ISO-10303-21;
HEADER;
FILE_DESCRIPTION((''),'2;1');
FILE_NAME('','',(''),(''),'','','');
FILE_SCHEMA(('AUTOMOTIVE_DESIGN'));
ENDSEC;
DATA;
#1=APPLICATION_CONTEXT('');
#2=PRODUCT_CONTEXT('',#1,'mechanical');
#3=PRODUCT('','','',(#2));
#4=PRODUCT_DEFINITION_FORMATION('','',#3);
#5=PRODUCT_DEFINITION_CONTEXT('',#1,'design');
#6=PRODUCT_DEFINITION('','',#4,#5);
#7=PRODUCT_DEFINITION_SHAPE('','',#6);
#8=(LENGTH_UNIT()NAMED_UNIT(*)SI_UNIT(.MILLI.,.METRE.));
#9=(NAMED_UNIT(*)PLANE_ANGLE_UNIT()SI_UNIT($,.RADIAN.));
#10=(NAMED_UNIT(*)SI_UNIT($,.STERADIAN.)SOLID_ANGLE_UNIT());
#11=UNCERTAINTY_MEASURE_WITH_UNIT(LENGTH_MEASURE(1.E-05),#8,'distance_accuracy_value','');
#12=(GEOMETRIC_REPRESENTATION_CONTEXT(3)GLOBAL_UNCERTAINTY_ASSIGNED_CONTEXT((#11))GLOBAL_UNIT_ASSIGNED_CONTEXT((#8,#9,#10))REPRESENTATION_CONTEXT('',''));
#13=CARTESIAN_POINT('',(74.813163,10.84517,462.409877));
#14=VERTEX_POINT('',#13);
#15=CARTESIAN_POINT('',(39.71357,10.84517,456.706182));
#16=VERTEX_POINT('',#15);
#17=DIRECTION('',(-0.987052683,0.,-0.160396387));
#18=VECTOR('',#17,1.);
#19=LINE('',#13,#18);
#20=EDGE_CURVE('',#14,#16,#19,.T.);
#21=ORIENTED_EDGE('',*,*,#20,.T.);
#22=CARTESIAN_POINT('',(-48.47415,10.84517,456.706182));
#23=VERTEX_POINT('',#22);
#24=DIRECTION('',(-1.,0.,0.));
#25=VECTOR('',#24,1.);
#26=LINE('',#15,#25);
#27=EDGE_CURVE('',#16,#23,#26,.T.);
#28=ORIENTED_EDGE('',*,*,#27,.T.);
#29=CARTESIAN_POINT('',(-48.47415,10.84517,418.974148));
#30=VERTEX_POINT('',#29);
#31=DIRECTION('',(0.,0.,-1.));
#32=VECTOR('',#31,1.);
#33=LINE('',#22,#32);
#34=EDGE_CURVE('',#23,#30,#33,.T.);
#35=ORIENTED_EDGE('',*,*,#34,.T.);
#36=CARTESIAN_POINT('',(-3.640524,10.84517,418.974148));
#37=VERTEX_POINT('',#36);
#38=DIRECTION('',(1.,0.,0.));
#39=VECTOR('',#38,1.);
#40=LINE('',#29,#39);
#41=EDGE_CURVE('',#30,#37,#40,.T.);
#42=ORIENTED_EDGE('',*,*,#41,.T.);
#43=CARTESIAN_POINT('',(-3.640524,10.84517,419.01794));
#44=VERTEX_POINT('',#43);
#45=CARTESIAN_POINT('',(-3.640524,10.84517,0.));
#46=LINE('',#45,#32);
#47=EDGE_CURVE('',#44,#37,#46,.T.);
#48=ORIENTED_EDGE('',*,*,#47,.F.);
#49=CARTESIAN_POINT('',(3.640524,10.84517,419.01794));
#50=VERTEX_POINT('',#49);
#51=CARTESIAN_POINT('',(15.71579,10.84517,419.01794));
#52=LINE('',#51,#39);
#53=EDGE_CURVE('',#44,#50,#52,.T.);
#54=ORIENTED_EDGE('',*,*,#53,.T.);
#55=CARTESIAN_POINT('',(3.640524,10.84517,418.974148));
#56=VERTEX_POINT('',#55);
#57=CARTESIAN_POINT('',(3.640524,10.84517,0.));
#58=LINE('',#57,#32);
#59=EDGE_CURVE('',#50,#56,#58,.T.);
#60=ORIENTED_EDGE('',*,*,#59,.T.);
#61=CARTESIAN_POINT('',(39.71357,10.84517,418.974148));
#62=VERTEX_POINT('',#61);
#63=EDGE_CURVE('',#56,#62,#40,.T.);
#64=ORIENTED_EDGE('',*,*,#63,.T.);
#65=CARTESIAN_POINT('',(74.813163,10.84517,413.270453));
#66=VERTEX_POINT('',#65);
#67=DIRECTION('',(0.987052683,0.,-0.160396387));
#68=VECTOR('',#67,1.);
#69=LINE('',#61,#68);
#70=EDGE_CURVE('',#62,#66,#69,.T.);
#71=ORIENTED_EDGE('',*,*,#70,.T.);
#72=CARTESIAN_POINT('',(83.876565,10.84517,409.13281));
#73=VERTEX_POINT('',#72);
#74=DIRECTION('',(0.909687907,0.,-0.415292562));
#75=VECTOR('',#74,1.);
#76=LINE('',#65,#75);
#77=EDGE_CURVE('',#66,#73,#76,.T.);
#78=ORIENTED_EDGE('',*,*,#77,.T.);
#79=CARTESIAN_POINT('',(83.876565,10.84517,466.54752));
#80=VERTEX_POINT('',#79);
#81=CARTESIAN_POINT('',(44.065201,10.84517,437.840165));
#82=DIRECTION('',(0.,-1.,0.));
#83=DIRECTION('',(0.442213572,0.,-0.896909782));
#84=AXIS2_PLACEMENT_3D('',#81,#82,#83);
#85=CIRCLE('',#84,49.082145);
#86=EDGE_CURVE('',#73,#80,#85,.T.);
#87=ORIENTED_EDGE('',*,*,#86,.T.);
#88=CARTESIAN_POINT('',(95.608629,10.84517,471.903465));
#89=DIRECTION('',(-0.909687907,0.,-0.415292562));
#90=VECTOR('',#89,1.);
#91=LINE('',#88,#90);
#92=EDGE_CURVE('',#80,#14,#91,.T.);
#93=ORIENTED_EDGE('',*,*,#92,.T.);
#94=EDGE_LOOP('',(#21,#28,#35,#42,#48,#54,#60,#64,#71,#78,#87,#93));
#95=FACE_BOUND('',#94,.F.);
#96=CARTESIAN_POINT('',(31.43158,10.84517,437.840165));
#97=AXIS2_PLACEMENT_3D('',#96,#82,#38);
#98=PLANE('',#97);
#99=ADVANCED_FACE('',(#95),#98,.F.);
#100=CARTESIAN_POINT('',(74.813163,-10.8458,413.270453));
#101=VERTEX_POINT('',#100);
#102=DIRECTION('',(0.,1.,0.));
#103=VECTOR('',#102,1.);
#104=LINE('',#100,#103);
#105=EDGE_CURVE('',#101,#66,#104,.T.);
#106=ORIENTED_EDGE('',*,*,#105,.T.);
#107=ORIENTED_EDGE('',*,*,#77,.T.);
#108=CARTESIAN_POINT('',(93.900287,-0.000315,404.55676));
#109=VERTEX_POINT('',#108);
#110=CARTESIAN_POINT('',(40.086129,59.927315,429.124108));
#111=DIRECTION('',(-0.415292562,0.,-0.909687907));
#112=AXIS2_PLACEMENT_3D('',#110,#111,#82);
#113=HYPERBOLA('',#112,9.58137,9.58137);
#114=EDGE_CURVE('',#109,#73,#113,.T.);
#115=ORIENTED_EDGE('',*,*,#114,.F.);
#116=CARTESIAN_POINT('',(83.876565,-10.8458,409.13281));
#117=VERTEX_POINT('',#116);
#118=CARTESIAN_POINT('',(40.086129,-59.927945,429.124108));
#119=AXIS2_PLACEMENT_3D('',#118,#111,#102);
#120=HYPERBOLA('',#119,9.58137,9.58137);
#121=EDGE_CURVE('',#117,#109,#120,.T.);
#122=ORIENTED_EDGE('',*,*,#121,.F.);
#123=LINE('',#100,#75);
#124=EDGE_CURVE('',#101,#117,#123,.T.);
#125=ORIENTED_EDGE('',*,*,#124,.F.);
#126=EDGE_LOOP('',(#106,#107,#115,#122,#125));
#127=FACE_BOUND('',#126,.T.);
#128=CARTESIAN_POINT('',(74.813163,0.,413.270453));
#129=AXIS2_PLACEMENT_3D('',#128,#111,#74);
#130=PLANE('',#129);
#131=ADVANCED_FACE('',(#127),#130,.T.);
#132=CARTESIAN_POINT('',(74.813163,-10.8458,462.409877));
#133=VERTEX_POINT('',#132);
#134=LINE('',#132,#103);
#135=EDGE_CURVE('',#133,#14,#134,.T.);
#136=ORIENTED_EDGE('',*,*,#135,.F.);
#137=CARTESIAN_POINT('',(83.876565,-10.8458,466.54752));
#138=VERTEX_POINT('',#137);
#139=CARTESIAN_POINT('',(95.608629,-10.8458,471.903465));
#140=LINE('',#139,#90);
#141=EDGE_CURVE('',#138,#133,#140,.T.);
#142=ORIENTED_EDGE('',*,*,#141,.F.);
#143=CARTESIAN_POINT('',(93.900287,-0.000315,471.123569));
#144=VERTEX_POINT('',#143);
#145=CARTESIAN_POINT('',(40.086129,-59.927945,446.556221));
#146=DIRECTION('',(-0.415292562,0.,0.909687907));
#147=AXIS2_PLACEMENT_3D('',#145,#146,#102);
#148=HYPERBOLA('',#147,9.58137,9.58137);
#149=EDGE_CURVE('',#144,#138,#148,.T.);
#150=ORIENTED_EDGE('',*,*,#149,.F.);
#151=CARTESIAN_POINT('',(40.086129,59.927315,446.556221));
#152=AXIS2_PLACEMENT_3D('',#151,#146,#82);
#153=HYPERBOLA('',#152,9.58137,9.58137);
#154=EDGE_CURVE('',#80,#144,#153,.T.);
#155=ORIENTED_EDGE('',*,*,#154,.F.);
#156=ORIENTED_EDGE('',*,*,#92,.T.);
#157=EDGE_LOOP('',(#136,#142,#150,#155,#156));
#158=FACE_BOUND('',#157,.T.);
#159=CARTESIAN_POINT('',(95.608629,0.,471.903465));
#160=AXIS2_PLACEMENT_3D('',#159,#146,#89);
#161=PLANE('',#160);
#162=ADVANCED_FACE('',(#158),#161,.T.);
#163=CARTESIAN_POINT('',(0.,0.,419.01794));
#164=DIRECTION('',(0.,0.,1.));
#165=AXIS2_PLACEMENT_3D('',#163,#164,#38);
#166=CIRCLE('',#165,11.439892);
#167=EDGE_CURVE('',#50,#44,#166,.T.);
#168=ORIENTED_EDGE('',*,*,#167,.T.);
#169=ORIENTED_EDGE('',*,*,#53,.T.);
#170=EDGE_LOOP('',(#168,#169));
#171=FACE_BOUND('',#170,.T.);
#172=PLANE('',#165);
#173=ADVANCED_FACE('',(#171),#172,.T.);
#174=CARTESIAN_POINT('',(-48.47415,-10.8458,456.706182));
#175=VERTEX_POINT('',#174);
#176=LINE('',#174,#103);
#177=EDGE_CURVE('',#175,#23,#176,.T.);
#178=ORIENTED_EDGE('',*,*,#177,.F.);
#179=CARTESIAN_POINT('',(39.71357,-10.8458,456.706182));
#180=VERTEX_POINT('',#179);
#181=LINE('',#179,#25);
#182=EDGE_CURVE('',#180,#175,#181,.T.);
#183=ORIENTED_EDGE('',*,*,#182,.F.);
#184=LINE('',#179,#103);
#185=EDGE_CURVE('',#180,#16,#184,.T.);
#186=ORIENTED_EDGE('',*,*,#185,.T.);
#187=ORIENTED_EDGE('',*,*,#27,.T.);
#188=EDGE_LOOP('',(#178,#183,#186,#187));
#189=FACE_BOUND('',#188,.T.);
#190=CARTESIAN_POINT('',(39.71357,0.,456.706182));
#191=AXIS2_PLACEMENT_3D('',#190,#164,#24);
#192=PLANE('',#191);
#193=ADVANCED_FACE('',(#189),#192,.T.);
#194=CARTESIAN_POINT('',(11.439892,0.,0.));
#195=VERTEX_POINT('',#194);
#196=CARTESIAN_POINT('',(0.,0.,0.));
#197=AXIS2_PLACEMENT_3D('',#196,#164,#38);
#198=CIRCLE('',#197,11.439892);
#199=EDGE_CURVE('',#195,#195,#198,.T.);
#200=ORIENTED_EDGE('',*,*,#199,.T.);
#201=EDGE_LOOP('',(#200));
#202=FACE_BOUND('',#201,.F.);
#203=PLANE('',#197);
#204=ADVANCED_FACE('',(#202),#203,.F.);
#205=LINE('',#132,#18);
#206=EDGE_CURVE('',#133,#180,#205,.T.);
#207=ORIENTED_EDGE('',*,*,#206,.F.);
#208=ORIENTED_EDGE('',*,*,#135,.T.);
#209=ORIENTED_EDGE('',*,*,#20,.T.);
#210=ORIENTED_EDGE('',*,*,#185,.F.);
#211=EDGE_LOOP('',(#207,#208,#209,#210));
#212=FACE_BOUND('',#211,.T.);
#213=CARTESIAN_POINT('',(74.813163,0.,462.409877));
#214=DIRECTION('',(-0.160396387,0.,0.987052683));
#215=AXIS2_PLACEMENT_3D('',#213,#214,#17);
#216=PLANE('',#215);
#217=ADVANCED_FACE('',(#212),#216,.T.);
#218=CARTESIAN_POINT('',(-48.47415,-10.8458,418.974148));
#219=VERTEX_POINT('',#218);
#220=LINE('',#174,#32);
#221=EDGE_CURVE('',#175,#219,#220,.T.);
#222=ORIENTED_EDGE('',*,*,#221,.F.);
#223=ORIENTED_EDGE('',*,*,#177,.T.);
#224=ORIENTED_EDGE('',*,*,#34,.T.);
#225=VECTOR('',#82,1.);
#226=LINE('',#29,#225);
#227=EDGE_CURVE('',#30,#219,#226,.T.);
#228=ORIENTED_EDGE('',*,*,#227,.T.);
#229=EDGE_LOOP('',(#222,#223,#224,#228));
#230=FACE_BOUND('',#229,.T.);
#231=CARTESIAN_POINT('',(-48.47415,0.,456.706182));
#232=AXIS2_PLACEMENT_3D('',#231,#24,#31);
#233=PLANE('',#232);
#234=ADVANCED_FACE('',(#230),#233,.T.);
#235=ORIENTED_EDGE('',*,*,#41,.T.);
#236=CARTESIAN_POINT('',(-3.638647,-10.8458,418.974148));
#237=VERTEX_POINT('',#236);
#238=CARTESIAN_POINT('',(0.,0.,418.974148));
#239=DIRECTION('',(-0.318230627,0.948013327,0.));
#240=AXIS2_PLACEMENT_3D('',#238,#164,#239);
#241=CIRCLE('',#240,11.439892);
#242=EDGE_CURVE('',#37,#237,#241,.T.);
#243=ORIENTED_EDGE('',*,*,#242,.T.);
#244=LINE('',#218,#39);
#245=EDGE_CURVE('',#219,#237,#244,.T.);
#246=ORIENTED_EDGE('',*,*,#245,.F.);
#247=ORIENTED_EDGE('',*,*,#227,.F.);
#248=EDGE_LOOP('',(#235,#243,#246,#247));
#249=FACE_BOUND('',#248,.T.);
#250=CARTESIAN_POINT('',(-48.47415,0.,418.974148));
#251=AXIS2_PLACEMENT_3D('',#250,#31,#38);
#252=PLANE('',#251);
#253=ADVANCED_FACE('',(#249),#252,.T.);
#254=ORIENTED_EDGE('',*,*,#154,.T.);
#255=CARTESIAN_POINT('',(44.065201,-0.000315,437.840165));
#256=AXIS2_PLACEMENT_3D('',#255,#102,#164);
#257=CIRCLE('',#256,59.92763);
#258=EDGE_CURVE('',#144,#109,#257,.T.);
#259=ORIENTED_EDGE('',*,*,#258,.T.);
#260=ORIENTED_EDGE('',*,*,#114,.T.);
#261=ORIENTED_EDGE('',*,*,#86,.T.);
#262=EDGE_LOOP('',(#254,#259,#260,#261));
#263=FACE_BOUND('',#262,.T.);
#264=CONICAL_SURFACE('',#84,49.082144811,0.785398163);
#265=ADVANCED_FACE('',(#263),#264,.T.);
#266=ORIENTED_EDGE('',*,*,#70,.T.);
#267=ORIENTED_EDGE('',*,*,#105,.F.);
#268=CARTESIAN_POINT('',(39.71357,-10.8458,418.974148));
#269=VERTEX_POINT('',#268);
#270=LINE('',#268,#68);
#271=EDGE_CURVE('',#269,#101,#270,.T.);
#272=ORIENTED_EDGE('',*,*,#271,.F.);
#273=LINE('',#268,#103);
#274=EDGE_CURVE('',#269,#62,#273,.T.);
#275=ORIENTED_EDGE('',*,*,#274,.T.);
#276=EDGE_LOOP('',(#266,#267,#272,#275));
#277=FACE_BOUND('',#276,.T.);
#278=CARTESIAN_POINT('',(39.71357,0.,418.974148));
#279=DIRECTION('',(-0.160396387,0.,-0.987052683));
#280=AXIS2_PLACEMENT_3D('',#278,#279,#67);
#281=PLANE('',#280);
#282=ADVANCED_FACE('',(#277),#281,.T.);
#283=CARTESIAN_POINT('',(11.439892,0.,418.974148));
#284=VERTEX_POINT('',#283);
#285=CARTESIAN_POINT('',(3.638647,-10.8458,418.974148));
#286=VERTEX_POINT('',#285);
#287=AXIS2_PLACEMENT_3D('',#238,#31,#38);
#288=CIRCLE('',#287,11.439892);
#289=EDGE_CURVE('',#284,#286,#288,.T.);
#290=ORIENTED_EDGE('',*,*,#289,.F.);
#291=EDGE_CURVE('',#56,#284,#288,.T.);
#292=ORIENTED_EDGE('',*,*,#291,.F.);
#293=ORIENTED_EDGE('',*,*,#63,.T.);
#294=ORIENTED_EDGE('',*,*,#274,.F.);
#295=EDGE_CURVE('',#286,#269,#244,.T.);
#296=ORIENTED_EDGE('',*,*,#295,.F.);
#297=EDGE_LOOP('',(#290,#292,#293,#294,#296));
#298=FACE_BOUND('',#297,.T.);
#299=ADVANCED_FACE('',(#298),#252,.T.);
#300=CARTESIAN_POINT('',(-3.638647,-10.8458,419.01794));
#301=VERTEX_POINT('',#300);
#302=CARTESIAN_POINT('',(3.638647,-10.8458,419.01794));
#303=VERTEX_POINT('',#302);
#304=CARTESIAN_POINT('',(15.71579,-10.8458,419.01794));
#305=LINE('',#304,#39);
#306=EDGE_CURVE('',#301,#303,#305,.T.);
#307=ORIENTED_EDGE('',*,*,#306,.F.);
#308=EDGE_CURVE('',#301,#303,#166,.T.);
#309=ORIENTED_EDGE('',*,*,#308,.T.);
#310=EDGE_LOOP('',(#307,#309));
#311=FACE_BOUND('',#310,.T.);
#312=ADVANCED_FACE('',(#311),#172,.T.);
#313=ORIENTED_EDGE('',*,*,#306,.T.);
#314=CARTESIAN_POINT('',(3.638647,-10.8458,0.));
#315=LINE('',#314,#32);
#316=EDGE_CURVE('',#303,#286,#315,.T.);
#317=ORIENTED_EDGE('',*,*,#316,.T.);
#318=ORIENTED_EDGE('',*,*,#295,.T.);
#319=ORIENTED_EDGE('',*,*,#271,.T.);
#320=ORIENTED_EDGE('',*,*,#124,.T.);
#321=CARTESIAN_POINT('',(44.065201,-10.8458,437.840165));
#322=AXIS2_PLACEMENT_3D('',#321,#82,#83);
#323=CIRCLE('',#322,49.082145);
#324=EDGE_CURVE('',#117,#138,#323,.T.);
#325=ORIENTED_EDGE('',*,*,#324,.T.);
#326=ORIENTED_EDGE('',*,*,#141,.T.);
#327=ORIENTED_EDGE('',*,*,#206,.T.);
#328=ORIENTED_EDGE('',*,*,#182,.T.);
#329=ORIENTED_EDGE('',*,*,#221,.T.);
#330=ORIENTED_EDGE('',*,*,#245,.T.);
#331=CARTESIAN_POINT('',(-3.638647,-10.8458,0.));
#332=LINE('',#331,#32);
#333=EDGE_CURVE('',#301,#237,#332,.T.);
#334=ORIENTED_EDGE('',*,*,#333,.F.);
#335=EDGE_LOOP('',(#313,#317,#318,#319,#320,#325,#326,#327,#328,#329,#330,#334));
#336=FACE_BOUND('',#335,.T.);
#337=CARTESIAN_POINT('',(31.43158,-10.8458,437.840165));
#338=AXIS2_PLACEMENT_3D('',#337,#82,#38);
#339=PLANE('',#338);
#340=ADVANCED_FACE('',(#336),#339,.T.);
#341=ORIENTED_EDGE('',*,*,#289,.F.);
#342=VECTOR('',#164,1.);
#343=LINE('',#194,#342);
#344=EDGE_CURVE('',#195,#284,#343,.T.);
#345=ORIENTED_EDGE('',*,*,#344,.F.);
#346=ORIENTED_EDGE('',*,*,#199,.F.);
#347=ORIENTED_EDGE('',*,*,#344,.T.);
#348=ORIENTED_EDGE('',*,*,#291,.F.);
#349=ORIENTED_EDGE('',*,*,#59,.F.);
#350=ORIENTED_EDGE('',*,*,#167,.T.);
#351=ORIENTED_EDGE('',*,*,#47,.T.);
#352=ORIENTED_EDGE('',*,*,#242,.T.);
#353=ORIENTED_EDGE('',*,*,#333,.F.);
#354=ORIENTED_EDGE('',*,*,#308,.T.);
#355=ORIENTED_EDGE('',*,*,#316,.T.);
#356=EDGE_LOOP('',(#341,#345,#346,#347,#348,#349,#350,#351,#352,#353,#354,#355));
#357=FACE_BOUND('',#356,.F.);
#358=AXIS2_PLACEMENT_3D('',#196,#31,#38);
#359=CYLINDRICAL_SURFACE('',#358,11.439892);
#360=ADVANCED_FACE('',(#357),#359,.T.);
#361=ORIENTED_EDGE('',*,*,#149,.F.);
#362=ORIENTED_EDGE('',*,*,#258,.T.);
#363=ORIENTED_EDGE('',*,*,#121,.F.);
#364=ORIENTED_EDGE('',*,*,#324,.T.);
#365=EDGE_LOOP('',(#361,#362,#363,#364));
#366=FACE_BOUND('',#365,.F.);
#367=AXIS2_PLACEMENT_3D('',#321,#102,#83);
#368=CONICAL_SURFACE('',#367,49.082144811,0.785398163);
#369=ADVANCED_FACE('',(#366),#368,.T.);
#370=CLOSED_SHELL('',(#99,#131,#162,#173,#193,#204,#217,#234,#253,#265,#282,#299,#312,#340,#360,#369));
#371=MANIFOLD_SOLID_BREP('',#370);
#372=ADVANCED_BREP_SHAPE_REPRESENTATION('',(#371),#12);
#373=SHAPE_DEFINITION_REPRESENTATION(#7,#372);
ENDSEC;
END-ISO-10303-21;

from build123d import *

# Parameters (mm, degrees)
F0_R          = 11.4398919201
F1_DEPTH      = 419.01794
F3_DEPTH      = 10.8458
F3_DEPTH_BACK = 10.84517
F4_T2_ANGLE   = 127.5095974459
F4_T4_ANGLE   = 127.5095974459


# Not quite as in the source:
# - a fillet or chamfer that OpenCascade refuses, or shapes differently, is made with other operations: its cross-section is extruded or revolved along the edge and cut away or added


with BuildPart() as f1:
    # F0 (on Top) → F1 (new body)
    with BuildSketch(Plane.XY):
        Circle(F0_R)
    extrude(amount=F1_DEPTH)

    # F2 (on Front) → F3 (join, two sides)
    with BuildSketch(Plane.XZ) as f3_sk:
        with BuildLine():
            Line((-48.4741501155, 456.7061818215), (-48.4741501155, 418.9741480511))
            Line((-48.4741501155, 418.9741480511), (39.7135697317, 418.9741480511))
            Line((39.7135697317, 418.9741480511), (74.8131631411, 413.270452539))
            Line((74.8131631411, 413.270452539), (95.608628696, 403.7768645791))
            ThreePointArc((95.608628696, 403.7768645791), (105.8473453497, 437.8401649363), (95.608628696, 471.9034652936))
            Line((95.608628696, 471.9034652936), (74.8131631411, 462.4098773337))
            Line((74.8131631411, 462.4098773337), (39.7135697317, 456.7061818215))
            Line((39.7135697317, 456.7061818215), (-48.4741501155, 456.7061818215))
        make_face()
    extrude(amount=F3_DEPTH)
    extrude(f3_sk.sketch, amount=-F3_DEPTH_BACK)

    # F4: chamfer of 12.7 on 2 edges, made by hand

    # F4_s1 → F4_t2 (revolve, cut)
    with BuildSketch(Plane(origin=(209.1067778356, 0, 103.0982793805), x_dir=(0, 1, 0), z_dir=(-0.8969097816, 0, -0.4422135724))):
        Polygon((-10.8458, -324.1347521568), (1.8542, -311.4347521568), (-10.8458, -311.4347521568), align=None)
    revolve(axis=Axis((44.0652005391, -10.8458, 437.8401649363), (0, -1, 0)), revolution_arc=F4_T2_ANGLE, mode=Mode.SUBTRACT)

    # F4_s3 → F4_t4 (revolve, cut)
    with BuildSketch(Plane(origin=(209.1067778356, 0, 103.0982793805), x_dir=(0, 1, 0), z_dir=(-0.8969097816, 0, -0.4422135724))):
        Polygon((10.84517, -324.1347521568), (-1.85483, -311.4347521568), (10.84517, -311.4347521568), align=None)
    revolve(axis=Axis((44.0652005391, 10.84517, 437.8401649363), (0, -1, 0)), revolution_arc=F4_T4_ANGLE, mode=Mode.SUBTRACT)


solid = f1.part
